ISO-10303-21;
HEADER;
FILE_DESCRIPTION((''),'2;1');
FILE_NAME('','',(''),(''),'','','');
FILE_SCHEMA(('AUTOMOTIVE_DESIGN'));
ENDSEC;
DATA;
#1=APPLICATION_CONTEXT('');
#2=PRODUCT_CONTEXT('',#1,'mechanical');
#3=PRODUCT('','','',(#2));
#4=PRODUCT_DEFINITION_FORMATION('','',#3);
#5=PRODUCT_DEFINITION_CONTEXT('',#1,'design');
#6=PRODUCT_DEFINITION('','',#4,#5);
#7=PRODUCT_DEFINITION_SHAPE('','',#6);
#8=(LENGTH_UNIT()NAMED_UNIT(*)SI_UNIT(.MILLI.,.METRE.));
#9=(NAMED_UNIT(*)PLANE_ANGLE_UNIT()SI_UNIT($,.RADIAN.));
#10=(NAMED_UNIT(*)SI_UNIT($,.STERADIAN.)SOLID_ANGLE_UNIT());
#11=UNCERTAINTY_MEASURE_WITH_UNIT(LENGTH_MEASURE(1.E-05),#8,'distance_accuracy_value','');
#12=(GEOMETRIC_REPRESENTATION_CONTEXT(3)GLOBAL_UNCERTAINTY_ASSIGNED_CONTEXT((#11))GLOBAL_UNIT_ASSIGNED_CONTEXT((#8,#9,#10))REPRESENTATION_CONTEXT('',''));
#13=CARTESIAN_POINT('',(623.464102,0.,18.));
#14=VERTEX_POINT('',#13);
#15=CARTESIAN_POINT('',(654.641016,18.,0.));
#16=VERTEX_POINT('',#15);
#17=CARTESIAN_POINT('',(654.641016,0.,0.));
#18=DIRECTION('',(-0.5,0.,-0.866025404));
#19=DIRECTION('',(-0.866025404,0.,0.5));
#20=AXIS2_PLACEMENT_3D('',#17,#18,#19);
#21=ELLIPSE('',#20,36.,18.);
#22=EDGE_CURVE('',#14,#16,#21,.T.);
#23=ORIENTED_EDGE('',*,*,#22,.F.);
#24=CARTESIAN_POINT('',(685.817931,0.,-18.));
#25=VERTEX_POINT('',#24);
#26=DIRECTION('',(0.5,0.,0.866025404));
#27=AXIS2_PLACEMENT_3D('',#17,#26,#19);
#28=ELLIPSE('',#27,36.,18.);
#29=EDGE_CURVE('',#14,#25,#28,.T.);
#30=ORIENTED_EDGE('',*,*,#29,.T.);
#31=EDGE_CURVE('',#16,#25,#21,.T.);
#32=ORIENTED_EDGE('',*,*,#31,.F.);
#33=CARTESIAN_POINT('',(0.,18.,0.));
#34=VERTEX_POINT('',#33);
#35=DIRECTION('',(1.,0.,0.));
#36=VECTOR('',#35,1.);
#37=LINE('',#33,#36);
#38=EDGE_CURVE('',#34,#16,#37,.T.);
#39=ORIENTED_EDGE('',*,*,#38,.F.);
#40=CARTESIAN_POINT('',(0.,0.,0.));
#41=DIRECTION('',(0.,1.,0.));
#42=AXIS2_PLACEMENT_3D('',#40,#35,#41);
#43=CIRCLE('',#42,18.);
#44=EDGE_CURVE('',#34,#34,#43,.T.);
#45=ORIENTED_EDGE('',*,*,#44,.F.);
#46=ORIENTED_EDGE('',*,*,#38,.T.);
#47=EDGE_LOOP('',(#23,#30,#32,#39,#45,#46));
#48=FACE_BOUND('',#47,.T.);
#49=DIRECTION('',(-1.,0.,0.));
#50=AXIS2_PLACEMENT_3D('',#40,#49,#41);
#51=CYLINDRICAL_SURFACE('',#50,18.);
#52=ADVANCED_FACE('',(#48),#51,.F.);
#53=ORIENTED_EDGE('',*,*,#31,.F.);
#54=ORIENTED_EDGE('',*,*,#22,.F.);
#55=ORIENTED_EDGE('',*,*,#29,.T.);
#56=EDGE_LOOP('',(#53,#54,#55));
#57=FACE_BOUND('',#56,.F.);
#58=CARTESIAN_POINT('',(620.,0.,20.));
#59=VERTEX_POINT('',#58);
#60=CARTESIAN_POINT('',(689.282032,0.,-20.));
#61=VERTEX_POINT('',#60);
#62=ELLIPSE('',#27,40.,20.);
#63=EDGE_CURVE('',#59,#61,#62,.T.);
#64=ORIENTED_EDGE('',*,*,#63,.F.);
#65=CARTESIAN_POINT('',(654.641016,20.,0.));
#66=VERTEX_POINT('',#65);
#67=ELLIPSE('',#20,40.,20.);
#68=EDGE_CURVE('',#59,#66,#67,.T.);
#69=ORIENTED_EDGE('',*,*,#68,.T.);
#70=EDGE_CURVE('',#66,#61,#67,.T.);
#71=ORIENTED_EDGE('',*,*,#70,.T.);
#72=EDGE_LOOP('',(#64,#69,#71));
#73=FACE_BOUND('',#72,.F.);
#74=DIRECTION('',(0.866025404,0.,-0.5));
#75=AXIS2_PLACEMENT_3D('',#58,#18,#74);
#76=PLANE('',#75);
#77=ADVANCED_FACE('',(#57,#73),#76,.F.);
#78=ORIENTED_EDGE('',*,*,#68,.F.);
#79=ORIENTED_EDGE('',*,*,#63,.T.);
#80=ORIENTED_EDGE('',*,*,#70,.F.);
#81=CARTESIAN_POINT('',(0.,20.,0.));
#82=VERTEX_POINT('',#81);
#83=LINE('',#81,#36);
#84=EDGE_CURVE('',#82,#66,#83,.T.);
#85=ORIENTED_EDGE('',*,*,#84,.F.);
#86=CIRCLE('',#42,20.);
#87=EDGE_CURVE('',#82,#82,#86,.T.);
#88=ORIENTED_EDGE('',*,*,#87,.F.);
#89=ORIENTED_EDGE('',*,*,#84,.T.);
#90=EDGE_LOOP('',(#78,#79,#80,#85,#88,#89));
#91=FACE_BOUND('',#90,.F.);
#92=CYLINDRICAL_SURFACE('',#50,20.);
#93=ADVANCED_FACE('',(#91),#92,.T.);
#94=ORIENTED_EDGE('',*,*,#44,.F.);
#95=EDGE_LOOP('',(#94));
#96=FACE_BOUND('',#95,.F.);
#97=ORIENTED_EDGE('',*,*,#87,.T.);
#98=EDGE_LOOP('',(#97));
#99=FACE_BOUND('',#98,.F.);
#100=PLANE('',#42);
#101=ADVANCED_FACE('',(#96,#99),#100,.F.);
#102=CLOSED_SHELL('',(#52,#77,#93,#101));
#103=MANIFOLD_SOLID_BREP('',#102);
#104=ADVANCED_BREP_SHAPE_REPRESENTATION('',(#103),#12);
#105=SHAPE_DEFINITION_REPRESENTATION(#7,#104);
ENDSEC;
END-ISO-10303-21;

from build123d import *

# Parameters (mm, degrees)
F0_R          = 20
F0_R_2        = 18
F1_DEPTH      = 750
F3_DEPTH      = 20.001
F3_DEPTH_BACK = 20.001


with BuildPart() as f1:
    # F0 (on Right) → F1 (new body)
    with BuildSketch(Plane.YZ):
        Circle(F0_R)
        Circle(F0_R_2, mode=Mode.SUBTRACT)
    extrude(amount=F1_DEPTH)

    # F2 (on Front) → F3 (cut, two sides)
    with BuildSketch(Plane.XZ) as f3_sk:
        Polygon((620, 20), (689.2820323028, -20), (803.4400343895, -20), (803.4400343895, 20), (689.2820323028, 20), align=None)
    extrude(amount=-F3_DEPTH, mode=Mode.SUBTRACT)
    extrude(f3_sk.sketch, amount=F3_DEPTH_BACK, mode=Mode.SUBTRACT)


solid = f1.part
